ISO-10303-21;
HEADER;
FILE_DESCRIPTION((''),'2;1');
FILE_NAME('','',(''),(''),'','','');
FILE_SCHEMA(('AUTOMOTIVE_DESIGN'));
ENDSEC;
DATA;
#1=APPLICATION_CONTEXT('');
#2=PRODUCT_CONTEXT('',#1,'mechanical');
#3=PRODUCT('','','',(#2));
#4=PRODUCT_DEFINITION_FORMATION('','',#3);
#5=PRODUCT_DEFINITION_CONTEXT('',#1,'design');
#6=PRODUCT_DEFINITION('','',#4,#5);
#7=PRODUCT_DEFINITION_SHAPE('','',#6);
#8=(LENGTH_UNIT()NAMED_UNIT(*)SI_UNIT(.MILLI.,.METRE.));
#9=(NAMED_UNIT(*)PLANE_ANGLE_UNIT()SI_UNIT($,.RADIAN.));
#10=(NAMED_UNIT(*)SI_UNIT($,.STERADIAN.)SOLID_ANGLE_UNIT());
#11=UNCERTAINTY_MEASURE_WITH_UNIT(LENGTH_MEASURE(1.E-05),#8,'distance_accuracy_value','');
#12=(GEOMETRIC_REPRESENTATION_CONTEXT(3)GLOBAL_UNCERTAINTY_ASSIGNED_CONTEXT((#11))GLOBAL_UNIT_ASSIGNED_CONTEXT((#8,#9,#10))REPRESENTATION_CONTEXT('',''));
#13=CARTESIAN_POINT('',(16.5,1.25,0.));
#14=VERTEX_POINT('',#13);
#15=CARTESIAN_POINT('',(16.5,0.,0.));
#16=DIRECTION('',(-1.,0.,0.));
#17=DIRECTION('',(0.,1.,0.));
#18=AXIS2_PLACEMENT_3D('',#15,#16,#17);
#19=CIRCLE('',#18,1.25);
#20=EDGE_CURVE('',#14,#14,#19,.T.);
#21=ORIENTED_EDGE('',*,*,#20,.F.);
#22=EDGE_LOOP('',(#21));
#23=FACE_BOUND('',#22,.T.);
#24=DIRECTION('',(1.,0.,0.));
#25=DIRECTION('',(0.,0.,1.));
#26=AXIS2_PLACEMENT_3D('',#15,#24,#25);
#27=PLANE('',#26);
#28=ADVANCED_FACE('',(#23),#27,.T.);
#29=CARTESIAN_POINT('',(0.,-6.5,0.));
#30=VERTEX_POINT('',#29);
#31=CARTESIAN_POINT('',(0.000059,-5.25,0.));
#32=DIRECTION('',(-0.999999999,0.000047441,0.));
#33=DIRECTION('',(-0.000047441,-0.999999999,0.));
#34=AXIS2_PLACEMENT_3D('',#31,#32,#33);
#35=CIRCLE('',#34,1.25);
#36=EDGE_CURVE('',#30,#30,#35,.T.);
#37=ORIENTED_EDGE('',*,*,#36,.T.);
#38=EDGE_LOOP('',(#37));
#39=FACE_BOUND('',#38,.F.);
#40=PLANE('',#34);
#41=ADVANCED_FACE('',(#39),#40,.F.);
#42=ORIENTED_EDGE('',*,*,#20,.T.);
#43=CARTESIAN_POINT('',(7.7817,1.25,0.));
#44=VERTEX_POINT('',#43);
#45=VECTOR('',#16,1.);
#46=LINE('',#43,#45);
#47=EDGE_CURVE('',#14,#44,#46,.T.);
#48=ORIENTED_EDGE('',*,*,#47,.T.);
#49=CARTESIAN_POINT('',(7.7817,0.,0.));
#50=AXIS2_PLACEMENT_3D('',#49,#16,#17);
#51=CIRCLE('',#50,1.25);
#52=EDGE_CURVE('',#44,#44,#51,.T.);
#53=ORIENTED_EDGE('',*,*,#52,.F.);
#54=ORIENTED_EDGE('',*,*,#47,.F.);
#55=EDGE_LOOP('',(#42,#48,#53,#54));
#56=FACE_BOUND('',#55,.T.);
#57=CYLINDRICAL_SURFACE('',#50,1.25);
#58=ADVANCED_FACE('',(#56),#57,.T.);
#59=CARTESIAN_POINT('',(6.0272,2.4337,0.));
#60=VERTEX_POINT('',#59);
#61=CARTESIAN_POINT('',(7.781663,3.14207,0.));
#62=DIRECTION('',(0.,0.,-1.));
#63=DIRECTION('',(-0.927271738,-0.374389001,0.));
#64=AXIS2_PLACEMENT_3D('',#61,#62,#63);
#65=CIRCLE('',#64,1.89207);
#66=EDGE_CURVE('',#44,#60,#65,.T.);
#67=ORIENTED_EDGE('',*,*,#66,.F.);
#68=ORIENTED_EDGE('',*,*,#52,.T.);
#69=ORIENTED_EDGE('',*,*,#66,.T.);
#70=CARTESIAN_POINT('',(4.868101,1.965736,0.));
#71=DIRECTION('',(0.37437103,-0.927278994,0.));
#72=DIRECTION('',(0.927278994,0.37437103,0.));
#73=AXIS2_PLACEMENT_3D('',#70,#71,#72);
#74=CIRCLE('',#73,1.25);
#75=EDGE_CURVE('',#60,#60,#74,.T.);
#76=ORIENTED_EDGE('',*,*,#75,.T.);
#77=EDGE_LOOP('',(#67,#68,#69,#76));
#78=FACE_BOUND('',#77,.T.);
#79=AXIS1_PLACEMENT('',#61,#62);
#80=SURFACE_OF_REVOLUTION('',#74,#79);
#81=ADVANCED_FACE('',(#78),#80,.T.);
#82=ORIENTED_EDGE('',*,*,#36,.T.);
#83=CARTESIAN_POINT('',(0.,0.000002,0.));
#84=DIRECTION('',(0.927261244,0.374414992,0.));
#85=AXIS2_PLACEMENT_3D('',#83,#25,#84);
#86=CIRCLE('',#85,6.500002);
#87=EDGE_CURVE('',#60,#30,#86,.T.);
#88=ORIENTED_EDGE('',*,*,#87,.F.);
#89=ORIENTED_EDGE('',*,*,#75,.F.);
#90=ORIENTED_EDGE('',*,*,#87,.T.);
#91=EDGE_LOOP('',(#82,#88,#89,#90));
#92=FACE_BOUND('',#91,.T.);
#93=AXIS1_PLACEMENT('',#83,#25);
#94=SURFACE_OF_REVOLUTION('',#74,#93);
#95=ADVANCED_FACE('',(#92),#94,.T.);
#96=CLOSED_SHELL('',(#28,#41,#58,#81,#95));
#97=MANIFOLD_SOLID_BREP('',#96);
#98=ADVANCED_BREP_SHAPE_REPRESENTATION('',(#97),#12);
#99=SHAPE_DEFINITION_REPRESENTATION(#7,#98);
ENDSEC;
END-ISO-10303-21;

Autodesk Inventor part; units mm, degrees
ref_plane "YZ Plane" through (0, 0, 0) normal (1, 0, 0) x (0, 1, 0)
ref_plane "XZ Plane" through (0, 0, 0) normal (0, 1, 0) x (-1, 0, 0)
sketch "Boceto1" plane through (0, 0, 0) normal (0, 0, 1) x (1, 0, 0)
  arc A0 (6.0272, 2.4337) -> (0, -6.5) centre (0, 0) ccw
  arc A1 (6.0272, 2.4337) -> (7.7817, 1.25) centre (7.7817, 3.1421) ccw
  line L0 (7.7817, 1.25) -> (16.5, 1.25)
  line L1 (16.5, 1.25) -> (16.5, -1.25) construction
  line L2 (16.5, 0) -> (-6.5, 0) construction
  dimension "d0" = 2.5
  dimension "d9" = 6.5
  dimension "d10" = 23
ref_plane "Plano de trabajo1" through (16.5, 1.25, 0) normal (1, 0, 0) x (0, 1, 0)
sketch "Boceto3" plane through (16.5, 1.25, 0) normal (1, 0, 0) x (0, 1, 0)
  circle A0 centre (-1.25, 0) radius 1.25
  point P0 (-1.25, 0)
sweep "Barrido1" add profiles "Boceto3" path "Boceto1"
thread "Rosca1"
properties part number "Gancho" material "Acero inoxidable"
